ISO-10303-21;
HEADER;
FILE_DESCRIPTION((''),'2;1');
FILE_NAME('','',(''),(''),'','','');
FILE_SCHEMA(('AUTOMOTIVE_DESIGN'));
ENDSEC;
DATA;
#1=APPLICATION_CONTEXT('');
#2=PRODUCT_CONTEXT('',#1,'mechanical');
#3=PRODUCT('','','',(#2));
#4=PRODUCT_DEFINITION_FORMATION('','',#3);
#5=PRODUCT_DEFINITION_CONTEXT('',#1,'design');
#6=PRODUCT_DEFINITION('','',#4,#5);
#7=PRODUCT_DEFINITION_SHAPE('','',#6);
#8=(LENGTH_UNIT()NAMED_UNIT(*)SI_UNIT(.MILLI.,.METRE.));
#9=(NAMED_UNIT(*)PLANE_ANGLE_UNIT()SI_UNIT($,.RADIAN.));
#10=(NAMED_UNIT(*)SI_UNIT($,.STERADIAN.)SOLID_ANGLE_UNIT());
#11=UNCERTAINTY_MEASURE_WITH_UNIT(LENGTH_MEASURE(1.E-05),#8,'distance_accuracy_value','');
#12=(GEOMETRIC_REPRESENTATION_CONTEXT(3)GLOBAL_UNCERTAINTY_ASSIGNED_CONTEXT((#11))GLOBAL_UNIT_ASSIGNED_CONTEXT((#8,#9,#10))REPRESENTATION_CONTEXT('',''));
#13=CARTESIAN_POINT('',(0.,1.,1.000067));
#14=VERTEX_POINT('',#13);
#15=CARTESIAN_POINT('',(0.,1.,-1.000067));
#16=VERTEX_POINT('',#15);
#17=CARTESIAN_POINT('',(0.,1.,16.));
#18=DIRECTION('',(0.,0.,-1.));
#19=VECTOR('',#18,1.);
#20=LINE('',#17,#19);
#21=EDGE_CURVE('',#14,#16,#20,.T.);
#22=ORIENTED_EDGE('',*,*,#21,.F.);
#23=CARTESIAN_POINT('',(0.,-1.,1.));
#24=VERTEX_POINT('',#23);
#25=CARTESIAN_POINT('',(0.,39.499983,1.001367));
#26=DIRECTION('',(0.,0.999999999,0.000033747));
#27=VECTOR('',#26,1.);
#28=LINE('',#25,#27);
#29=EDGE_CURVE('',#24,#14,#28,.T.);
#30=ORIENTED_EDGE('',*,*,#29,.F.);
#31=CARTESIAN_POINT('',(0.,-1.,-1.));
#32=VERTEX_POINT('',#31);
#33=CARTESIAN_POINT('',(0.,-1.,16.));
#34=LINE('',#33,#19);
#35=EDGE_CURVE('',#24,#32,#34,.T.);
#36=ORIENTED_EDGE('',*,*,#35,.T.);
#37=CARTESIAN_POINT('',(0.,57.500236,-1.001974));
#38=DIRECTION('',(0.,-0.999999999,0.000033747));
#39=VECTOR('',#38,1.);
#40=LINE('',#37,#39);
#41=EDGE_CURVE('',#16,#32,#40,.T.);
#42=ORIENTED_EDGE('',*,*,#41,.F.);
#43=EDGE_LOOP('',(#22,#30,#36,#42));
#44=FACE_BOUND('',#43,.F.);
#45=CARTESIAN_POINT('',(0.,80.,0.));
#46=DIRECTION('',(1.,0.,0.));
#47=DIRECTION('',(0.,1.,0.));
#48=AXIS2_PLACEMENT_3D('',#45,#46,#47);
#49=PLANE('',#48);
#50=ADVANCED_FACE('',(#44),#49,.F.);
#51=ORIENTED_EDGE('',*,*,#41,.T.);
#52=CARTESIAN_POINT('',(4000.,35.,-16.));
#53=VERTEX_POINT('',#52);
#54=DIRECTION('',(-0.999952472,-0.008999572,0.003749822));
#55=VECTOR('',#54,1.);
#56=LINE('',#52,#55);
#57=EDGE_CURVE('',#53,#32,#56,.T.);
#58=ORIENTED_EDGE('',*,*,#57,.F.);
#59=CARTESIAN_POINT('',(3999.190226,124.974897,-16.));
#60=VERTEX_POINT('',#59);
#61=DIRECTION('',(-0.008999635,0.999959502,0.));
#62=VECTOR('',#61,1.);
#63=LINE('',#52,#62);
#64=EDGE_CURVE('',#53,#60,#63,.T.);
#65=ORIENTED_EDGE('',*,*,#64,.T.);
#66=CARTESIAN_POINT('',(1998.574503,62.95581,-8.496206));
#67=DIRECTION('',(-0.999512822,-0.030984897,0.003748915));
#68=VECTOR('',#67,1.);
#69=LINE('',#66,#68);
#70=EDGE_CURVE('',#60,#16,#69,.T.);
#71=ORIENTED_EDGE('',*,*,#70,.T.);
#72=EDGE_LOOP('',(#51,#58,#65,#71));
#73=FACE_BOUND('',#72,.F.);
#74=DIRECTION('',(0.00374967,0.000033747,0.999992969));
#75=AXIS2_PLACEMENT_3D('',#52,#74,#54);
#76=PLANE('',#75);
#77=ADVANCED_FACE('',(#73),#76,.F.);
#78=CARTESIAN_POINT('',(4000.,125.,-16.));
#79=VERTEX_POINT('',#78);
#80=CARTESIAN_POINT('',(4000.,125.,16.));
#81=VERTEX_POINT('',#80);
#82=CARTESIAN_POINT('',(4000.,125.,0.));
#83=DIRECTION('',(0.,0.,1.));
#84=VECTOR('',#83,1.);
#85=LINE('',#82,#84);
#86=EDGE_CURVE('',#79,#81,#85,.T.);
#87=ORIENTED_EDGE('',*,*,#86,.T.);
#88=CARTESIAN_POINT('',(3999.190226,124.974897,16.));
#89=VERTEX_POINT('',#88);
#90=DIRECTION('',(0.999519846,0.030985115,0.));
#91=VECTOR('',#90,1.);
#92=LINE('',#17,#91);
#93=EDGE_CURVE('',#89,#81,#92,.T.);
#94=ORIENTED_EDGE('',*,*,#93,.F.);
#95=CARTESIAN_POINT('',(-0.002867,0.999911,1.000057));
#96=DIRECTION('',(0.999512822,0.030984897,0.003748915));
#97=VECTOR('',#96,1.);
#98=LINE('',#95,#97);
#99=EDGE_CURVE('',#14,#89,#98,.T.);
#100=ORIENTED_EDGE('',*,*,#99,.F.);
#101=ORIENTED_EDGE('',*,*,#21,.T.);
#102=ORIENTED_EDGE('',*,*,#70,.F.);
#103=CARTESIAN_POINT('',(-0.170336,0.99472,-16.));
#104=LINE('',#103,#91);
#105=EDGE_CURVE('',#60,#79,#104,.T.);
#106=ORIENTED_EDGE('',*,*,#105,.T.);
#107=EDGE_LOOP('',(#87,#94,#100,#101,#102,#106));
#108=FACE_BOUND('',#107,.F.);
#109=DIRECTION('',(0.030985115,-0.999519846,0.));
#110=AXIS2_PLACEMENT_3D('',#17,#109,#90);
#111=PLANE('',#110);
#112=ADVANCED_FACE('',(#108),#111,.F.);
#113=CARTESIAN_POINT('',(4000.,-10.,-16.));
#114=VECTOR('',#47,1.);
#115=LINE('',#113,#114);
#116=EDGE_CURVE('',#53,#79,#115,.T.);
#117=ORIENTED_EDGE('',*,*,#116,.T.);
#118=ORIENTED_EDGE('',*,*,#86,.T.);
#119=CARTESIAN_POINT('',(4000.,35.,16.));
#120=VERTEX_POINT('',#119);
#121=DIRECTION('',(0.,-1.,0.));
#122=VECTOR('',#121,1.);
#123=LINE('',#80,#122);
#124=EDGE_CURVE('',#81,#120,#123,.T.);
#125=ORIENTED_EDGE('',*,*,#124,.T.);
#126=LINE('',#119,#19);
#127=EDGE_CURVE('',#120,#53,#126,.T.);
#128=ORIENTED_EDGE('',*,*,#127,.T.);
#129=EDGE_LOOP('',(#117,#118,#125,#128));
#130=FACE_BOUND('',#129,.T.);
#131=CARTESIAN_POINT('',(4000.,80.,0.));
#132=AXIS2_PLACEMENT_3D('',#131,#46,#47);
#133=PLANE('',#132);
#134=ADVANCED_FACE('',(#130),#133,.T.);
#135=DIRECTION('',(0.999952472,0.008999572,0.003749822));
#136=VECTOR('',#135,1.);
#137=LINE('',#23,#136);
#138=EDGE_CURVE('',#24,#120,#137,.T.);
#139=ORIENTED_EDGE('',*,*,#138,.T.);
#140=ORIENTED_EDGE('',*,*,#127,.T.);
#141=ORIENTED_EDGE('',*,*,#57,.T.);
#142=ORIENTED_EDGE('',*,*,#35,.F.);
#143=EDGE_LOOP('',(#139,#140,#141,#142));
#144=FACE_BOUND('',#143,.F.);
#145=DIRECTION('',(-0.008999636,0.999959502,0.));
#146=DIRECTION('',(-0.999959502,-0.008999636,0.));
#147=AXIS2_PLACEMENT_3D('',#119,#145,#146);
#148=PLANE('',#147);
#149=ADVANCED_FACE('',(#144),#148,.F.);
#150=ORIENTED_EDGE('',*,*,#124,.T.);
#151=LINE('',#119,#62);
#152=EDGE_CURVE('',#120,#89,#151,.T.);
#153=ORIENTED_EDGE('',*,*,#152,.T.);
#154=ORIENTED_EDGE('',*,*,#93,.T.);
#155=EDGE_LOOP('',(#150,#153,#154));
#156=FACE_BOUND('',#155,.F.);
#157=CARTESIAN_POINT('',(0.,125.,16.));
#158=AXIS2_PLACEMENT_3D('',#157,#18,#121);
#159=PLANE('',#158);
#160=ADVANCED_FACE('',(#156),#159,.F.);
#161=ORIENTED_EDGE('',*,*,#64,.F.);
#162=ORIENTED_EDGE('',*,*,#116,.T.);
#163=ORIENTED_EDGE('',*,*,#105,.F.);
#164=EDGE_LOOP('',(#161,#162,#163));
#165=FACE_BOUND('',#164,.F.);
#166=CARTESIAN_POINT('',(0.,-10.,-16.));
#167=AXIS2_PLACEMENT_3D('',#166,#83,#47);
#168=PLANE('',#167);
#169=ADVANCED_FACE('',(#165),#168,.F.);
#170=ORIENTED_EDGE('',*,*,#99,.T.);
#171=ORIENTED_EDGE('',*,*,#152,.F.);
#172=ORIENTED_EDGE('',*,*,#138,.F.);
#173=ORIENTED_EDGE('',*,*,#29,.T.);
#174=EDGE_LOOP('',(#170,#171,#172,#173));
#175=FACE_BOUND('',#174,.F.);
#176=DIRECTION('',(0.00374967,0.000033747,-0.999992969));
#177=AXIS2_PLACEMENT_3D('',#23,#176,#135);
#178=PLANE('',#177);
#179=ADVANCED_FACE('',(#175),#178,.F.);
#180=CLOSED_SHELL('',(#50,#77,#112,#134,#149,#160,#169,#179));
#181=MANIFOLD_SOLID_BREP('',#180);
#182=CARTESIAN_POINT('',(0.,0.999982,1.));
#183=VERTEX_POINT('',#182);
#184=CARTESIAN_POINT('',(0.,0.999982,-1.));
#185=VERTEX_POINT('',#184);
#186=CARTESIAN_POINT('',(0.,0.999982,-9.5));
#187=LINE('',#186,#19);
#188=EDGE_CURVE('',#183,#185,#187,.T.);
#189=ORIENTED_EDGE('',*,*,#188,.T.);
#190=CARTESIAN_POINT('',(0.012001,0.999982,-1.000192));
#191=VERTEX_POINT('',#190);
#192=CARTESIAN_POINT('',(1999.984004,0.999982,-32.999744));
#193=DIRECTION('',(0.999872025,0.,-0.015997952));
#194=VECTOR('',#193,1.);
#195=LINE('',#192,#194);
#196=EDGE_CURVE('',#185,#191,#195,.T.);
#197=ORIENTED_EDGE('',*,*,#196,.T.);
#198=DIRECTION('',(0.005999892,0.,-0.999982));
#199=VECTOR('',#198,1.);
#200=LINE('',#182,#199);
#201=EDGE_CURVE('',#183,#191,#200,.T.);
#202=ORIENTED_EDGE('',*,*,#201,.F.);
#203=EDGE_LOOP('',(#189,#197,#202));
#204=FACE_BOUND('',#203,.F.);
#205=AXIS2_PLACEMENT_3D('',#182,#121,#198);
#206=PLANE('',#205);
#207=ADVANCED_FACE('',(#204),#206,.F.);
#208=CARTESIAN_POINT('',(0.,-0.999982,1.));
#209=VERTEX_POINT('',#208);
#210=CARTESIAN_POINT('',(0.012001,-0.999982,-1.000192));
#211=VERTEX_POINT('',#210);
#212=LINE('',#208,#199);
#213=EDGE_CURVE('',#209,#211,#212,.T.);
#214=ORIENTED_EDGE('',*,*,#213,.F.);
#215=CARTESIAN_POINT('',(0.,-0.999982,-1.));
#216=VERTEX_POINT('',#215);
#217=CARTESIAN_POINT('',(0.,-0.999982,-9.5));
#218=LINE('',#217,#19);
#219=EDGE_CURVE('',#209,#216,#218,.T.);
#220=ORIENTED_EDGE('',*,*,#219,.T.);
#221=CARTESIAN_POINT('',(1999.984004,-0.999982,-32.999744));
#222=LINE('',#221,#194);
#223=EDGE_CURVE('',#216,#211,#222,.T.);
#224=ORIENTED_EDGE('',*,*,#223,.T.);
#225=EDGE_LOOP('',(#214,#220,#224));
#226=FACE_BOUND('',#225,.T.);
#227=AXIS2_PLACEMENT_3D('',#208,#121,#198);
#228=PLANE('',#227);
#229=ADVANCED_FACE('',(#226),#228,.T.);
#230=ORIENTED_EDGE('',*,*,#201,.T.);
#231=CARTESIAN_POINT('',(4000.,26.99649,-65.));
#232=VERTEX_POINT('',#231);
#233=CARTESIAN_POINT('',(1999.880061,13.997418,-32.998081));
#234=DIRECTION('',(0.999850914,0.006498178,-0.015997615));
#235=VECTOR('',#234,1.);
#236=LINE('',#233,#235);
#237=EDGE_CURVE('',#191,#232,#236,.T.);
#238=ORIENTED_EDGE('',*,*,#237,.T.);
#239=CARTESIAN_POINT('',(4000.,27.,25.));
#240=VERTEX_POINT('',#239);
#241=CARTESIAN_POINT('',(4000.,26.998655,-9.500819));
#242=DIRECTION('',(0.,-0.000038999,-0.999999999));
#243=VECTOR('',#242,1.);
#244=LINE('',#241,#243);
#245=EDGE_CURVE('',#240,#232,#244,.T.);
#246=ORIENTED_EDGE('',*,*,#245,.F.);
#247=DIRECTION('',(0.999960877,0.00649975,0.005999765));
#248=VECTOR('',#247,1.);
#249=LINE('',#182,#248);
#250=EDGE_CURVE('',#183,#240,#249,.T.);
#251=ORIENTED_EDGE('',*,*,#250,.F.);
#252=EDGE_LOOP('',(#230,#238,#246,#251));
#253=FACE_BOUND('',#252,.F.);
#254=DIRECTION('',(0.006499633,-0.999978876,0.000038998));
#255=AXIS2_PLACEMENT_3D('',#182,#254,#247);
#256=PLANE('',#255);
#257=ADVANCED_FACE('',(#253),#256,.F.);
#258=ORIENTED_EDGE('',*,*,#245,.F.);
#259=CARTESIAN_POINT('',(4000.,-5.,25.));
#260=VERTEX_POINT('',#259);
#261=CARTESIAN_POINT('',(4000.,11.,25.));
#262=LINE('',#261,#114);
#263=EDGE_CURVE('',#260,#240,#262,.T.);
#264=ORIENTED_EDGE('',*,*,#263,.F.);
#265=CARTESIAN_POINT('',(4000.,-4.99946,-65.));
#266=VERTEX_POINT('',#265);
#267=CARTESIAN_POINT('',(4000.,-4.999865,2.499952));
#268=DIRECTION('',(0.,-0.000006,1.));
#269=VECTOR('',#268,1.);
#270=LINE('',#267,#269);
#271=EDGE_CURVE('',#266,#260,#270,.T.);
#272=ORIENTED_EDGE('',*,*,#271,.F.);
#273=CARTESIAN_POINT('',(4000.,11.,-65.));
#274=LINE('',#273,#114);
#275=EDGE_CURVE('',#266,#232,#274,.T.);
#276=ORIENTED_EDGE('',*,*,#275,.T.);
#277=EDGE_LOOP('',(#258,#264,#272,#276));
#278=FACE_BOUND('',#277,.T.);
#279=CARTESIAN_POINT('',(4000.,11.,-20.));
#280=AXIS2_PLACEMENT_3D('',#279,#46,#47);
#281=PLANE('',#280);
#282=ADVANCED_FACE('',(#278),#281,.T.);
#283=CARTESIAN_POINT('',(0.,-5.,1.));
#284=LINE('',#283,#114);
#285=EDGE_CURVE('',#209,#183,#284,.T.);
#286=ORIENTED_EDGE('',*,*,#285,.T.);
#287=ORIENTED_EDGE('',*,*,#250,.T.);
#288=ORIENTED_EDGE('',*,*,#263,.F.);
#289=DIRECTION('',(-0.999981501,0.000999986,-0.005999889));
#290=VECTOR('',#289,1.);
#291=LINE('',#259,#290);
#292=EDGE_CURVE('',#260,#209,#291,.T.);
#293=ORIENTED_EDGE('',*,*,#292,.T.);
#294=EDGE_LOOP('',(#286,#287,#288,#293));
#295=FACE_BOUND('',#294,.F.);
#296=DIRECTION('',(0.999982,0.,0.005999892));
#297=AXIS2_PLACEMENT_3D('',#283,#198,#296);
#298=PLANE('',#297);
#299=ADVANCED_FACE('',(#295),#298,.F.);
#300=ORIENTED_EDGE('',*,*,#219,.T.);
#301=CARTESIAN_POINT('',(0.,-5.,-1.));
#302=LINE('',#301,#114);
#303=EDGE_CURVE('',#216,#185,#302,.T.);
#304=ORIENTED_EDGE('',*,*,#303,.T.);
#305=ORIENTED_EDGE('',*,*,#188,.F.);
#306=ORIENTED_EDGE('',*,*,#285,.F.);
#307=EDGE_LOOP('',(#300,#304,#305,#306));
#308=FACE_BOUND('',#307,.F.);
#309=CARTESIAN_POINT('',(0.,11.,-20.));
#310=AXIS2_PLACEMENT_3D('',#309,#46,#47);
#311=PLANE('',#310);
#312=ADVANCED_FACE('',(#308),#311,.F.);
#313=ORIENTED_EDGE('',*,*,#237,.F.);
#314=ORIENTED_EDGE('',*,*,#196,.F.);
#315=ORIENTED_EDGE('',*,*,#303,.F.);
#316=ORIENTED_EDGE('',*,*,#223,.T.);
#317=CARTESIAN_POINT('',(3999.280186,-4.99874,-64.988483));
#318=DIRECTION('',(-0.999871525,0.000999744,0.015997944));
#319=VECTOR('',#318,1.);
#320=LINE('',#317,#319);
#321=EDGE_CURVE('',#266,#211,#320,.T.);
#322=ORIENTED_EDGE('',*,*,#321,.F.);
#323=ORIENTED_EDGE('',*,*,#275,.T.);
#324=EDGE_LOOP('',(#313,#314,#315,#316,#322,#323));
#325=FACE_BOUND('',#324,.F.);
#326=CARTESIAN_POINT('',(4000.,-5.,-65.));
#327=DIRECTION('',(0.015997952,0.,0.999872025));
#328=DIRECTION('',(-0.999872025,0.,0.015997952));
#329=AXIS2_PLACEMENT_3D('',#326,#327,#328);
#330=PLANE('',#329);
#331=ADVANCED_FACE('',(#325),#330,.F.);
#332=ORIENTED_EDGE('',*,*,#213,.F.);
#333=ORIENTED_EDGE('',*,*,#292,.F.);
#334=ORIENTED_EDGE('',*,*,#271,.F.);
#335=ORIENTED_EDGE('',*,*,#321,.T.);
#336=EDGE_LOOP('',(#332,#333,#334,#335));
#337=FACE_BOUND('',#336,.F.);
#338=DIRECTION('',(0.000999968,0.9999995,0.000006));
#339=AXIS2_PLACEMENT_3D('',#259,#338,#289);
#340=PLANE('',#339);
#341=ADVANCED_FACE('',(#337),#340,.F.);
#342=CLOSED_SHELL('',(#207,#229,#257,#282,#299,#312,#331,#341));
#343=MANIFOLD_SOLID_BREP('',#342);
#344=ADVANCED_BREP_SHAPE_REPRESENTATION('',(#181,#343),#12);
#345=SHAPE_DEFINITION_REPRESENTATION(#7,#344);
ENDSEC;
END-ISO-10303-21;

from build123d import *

# Parameters (mm, degrees)
F0_W      = 32
F0_H      = 90
F1_DEPTH  = 4000
F3_DEPTH  = 32.001
F5_DEPTH  = 89.9993800437
F6_DEPTH  = 0.3969928722
F7_W      = 90
F7_H      = 32
F7_W_2    = 45
F8_DEPTH  = 4000
F10_DEPTH = 81.001
F12_DEPTH = 125.99589731


with BuildPart() as f1:
    # F0 (on Right) → F1 (new body)
    with BuildSketch(Plane.YZ):
        with Locations((11, -20)):
            Rectangle(F0_W, F0_H)
    extrude(amount=F1_DEPTH)

    # F2 (on face) → F3 (cut, through all)
    with BuildSketch(Plane.XZ.offset(5)):
        Polygon((0, 25), (0, 1), (4000, 25), align=None)
        Polygon((4000, -65), (0, -1), (0, -65), align=None)
    extrude(amount=-F3_DEPTH, mode=Mode.SUBTRACT)

    # F4 (on face) → F5 (cut, through all)
    with BuildSketch(Plane(origin=(-0.005999784, 0, 0.9999640013), x_dir=(0.9999820005, 0, 0.005999892), z_dir=(-0.005999892, 0, 0.9999820005))):
        Polygon((0.005999892, 27), (0.005999892, 0.9999820005), (4000.077999244, 27), align=None)
        Polygon((4000.077999244, -5), (0.005999892, -0.9999820005), (0.005999892, -5), align=None)
    extrude(amount=-F5_DEPTH, mode=Mode.SUBTRACT)

    # F6 (cut, through all): faces of the model
    f6_faces = [f1.faces().sort_by_distance(p)[0] for p in [
        (0.0060005761, -2.9999910002, -9.60092e-05),
        (0.0060005761, 13.9999910002, -9.60092e-05),
    ]]
    extrude(f6_faces, amount=-F6_DEPTH, mode=Mode.SUBTRACT)


with BuildPart() as f8:
    # F7 (on Right) → F8 (new body)
    with BuildSketch(Plane.YZ):
        with Locations((80, 0)):
            Rectangle(F7_W, F7_H)
        with Locations((12.5, 0)):
            Rectangle(F7_W_2, F7_H)
    extrude(amount=F8_DEPTH)

    # F9 (on face) → F10 (cut, through all)
    with BuildSketch(Plane.XY.offset(16)):
        Polygon((4000, 35), (0, -1), (0, -10), (4000, -10), align=None)
        Polygon((0, 125), (0, 1), (4000, 125), align=None)
    extrude(amount=-F10_DEPTH, mode=Mode.SUBTRACT)

    # F11 (on face) → F12 (cut, through all)
    with BuildSketch(Plane(origin=(0.0089992711, -0.9999190066, 0), x_dir=(0.9999595025, 0.0089996355, 0), z_dir=(0.0089996355, -0.9999595025, 0))):
        Polygon((-0.0089996355, 16), (-0.0089996355, 1), (4000.1529970841, 16), align=None)
        Polygon((4000.1529970841, -16), (-0.0089996355, -1), (-0.0089996355, -16), align=None)
    extrude(amount=-F12_DEPTH, mode=Mode.SUBTRACT)


solid = Compound([f1.part, f8.part])
